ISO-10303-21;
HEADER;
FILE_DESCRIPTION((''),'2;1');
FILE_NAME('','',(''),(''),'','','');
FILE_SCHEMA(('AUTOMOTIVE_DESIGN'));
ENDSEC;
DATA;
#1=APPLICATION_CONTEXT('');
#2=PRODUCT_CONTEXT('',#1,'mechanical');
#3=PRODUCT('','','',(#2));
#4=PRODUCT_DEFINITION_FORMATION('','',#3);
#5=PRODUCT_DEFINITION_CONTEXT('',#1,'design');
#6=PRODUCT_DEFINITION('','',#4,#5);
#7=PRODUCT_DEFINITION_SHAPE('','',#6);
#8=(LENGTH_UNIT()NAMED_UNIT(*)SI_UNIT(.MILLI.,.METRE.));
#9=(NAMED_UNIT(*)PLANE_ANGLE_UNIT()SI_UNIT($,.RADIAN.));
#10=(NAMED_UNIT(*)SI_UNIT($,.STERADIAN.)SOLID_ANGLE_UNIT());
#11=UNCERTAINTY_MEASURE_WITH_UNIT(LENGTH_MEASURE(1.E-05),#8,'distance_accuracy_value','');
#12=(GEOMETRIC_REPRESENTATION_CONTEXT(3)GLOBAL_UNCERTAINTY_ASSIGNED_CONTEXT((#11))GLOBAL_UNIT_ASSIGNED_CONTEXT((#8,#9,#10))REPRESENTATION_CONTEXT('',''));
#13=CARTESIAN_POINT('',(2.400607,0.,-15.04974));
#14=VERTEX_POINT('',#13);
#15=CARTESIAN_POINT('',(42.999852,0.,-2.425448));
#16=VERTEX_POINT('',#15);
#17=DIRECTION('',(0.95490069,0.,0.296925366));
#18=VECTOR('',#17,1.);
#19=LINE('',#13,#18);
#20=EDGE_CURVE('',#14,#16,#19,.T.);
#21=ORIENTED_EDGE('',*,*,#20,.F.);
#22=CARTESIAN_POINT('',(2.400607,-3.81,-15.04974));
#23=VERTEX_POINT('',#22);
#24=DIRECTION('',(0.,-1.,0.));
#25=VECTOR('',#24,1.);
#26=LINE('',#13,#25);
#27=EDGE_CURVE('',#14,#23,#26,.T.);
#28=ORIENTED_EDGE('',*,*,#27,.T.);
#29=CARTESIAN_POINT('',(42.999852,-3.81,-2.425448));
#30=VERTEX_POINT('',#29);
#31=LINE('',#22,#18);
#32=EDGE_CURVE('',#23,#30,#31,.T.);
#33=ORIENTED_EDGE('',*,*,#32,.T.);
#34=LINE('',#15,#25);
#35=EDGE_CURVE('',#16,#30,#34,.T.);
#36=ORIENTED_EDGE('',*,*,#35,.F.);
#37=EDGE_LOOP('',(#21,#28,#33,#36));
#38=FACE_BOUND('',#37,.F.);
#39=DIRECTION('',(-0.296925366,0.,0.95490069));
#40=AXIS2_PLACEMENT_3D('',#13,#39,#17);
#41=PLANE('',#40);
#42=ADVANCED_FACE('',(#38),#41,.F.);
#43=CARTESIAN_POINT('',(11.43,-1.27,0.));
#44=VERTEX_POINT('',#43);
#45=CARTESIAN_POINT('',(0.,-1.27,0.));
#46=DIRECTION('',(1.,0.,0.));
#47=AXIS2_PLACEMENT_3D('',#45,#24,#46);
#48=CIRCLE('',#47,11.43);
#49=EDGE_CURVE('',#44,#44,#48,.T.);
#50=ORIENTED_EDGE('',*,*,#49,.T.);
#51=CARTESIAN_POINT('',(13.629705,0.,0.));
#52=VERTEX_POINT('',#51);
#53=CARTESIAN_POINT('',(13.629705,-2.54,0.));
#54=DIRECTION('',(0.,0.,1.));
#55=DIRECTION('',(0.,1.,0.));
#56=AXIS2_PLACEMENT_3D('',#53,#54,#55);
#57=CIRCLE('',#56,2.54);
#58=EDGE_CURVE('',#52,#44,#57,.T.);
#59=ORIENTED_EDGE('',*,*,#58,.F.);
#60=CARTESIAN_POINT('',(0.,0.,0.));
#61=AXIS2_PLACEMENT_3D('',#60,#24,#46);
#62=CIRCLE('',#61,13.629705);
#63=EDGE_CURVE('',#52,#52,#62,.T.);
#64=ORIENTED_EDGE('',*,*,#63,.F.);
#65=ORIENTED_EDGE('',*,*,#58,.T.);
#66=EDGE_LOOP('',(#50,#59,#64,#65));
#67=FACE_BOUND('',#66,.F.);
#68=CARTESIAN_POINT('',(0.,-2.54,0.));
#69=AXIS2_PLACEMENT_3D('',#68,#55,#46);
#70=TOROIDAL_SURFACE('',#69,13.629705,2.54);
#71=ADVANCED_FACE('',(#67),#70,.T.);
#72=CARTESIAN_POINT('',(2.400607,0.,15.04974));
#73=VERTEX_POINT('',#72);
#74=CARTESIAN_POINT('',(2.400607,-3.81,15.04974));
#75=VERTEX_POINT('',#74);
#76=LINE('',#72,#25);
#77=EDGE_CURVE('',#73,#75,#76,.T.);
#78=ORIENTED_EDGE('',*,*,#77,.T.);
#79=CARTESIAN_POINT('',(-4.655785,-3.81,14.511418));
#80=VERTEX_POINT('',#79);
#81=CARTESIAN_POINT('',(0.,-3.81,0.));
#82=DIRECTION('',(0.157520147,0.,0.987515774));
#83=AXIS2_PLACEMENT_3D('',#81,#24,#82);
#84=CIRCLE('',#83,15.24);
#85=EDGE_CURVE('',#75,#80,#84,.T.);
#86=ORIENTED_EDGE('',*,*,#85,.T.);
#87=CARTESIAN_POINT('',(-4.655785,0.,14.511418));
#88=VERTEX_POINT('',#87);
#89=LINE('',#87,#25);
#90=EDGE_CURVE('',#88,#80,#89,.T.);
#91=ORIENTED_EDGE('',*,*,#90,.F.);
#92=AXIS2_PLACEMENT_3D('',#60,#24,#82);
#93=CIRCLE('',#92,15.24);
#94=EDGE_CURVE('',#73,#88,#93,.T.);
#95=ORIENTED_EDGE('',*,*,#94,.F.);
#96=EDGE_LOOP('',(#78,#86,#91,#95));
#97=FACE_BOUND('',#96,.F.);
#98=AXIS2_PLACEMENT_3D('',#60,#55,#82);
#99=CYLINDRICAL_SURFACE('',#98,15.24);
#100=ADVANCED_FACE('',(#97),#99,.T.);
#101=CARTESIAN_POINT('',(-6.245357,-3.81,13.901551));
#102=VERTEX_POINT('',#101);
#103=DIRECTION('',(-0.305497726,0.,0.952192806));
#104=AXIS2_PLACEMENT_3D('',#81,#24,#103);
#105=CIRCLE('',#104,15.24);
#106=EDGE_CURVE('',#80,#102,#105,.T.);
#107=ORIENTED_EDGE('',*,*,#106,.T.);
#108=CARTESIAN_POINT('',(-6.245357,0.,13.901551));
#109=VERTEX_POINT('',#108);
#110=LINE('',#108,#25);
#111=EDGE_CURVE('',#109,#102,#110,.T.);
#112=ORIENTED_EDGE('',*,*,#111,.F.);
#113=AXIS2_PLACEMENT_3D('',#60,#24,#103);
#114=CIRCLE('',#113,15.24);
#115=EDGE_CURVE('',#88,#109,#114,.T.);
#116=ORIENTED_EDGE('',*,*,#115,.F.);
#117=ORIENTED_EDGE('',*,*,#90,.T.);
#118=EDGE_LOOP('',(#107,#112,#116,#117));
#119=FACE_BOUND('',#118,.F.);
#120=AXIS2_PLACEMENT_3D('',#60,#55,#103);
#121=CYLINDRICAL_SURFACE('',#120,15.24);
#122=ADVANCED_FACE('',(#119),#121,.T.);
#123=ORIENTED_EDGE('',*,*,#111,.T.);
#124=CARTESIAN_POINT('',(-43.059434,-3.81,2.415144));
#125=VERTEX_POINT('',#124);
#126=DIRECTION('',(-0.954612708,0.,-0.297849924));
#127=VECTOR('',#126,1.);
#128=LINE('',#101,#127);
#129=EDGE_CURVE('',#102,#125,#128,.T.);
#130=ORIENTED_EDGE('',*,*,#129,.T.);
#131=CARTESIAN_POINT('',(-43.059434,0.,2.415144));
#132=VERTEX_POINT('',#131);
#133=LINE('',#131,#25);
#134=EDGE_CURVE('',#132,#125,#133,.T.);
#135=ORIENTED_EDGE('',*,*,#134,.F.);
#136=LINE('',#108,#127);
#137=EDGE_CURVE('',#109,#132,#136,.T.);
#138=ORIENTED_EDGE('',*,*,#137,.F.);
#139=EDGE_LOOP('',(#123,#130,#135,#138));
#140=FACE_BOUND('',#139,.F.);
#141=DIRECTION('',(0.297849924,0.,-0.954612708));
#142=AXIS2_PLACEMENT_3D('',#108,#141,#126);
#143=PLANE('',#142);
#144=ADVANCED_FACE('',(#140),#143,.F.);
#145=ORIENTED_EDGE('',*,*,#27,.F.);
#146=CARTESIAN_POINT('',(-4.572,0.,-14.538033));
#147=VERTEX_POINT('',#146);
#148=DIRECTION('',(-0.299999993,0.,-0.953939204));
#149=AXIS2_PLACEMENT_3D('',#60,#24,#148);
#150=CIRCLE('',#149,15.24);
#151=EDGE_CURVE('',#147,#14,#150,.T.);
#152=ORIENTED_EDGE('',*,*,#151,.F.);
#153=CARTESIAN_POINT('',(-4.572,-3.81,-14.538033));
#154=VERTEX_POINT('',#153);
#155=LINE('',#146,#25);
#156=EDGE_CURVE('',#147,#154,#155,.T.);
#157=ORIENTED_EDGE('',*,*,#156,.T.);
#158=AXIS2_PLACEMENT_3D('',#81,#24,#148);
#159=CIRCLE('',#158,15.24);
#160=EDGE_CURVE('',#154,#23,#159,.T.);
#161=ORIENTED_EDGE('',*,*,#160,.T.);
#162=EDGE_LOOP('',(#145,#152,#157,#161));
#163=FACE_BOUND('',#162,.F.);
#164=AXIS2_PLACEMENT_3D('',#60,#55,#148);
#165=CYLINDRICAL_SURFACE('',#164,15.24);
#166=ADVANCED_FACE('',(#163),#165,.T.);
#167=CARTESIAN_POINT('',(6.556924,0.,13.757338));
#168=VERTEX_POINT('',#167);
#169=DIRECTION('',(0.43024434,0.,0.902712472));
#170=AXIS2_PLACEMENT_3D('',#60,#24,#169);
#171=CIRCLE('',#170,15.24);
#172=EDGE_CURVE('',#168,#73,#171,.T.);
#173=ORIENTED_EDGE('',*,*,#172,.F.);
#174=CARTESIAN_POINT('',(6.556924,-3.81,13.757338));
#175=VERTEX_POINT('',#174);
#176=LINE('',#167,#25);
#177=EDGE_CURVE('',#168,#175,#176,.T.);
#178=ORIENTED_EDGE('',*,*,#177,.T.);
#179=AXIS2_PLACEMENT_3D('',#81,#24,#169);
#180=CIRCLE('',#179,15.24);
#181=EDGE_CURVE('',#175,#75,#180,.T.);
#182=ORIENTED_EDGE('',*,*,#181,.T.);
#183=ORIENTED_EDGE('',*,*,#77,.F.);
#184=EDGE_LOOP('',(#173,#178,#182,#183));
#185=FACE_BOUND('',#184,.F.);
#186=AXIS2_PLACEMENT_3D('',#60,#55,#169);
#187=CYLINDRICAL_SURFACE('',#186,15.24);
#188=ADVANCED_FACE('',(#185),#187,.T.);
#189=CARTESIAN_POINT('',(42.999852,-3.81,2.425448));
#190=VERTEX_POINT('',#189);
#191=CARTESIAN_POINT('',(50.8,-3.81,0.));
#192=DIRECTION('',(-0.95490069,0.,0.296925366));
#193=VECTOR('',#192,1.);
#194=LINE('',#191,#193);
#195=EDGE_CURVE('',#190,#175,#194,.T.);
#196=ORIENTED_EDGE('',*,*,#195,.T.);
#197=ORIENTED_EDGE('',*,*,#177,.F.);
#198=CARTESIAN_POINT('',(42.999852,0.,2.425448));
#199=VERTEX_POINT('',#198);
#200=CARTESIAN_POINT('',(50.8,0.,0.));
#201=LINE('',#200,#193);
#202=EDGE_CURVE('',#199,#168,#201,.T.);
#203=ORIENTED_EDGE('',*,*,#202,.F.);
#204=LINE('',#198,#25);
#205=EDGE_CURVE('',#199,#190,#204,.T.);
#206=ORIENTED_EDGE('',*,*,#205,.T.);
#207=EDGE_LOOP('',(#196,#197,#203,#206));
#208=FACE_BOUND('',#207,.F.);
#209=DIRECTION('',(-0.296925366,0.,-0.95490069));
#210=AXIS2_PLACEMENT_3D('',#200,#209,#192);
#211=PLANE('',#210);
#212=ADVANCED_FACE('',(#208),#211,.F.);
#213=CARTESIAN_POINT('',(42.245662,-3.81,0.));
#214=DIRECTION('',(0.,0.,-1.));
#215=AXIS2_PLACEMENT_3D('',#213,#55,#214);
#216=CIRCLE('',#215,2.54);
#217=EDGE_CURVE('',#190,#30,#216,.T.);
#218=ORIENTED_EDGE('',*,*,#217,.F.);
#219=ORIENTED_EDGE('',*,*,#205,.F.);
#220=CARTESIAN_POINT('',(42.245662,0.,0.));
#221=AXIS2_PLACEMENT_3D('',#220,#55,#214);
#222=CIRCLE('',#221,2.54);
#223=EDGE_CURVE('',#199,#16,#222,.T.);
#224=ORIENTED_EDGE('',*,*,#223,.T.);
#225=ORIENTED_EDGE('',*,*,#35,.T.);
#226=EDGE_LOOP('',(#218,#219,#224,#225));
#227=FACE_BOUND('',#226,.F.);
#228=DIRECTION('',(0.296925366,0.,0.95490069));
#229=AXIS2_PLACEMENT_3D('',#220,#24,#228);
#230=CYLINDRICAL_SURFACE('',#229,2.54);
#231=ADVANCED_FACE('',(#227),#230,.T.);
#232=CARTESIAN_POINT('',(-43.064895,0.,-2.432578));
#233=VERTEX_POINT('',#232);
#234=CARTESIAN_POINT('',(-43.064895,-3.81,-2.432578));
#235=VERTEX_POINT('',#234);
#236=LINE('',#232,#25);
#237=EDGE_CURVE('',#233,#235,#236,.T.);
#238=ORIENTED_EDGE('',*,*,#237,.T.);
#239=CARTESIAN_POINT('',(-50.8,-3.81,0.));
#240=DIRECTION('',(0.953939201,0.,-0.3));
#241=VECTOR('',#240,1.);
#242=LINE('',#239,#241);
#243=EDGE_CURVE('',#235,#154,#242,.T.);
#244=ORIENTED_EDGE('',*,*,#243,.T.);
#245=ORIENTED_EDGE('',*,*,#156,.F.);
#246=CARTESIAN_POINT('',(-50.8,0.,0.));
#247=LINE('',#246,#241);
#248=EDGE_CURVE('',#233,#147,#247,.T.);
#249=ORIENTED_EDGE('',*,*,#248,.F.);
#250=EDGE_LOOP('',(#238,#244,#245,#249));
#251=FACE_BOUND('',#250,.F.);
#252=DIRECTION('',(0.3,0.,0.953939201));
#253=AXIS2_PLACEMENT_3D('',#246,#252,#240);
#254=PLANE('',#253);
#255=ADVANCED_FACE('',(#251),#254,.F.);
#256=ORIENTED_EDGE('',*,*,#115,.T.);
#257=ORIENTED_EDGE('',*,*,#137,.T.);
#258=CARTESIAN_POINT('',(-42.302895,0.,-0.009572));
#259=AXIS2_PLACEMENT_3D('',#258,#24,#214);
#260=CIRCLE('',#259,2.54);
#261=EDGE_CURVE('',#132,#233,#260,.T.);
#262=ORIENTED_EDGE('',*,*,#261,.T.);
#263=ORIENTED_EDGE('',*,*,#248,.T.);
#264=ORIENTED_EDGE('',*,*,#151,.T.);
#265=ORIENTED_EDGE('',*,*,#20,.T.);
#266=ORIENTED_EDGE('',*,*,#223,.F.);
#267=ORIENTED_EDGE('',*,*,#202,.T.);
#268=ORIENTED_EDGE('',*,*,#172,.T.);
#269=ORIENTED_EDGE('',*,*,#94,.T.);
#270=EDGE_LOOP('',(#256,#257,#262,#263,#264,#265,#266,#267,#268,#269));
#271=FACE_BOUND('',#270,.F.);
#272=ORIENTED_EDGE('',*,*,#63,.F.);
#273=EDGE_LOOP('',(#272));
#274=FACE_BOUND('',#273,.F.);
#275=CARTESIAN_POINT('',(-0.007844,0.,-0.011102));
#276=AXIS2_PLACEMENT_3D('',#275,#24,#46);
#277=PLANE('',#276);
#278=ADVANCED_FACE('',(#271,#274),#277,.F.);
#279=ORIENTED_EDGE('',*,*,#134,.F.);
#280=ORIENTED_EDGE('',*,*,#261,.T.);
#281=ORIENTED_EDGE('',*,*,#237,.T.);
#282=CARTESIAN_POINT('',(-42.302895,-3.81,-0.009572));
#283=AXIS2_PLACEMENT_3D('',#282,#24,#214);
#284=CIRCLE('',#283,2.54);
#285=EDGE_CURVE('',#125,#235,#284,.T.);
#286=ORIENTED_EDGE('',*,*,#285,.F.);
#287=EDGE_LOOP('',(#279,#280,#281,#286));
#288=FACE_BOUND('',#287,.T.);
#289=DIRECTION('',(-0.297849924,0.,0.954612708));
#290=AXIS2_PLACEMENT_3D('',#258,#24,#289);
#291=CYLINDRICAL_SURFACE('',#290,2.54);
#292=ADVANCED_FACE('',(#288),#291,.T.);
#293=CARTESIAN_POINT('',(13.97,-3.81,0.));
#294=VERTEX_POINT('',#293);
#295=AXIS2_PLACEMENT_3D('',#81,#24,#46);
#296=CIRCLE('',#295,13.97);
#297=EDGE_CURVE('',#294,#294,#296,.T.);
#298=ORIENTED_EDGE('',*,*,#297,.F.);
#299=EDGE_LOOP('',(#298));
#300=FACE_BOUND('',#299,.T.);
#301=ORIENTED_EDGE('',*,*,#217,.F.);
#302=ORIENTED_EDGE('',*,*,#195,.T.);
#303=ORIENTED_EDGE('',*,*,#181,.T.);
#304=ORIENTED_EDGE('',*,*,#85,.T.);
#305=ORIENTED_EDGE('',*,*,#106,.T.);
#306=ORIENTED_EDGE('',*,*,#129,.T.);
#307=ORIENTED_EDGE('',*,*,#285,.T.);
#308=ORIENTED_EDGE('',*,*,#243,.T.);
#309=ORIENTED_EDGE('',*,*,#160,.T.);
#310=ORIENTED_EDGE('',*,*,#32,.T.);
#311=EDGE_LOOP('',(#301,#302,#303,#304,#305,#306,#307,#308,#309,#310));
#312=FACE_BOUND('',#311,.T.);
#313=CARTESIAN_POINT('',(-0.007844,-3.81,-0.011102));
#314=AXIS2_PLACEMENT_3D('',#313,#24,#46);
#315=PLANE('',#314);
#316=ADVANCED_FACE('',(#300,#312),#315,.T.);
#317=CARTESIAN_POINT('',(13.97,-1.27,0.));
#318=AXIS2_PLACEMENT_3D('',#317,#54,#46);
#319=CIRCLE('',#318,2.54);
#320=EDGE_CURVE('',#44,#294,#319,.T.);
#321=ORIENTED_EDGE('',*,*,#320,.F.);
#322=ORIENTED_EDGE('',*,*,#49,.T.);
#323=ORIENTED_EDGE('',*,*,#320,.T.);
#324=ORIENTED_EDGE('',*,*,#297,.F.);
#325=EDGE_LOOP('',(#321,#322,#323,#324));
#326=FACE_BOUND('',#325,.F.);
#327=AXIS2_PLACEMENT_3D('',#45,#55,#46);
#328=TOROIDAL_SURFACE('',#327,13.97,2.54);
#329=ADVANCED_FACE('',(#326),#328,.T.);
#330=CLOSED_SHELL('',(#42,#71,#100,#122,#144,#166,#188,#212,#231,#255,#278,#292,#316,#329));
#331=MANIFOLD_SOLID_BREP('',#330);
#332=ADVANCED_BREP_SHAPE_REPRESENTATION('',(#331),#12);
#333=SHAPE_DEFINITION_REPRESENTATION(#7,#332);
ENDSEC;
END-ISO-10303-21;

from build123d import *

# Parameters (mm, degrees)
F0_R     = 11.43
F1_DEPTH = 3.81
F2_R     = 2.54


# Not quite as in the source:
# - a fillet or chamfer that OpenCascade refuses, or shapes differently, is made with other operations: its cross-section is extruded or revolved along the edge and cut away or added


with BuildPart() as f1:
    # F0 (on Front) → F1 (new body)
    with BuildSketch(Plane.XZ):
        with BuildLine():
            Line((6.5569237481, 13.7573380769), (2.4006070358, 15.0497403918))
            ThreePointArc((2.4006070358, 15.0497403918), (-1.1592691439, 15.195844664), (-4.6557853401, 14.5114183617))
            ThreePointArc((-4.6557853401, 14.5114183617), (-5.4590945375, 14.2286994076), (-6.2453574463, 13.9015506462))
            Line((-6.2453574463, 13.9015506462), (-50.8, 0))
            Line((-50.8, 0), (-4.5719998884, -14.5380334647))
            ThreePointArc((-4.5719998884, -14.5380334647), (-1.1154361142, -15.1991250497), (2.4006070358, -15.0497403918))
            Line((2.4006070358, -15.0497403918), (50.8, 0))
            Line((50.8, 0), (6.5569237481, 13.7573380769))
        make_face()
        Circle(F0_R, mode=Mode.SUBTRACT)
        with BuildLine():
            ThreePointArc((6.5569237481, 13.7573380769), (4.5251425803, 14.552686509), (2.4006070358, 15.0497403918))
            Line((2.4006070358, 15.0497403918), (6.5569237481, 13.7573380769))
        make_face()
    extrude(amount=F1_DEPTH)

    # F2
    f2_edges = [f1.edges().sort_by_distance(p)[0] for p in [
        (50.8, -1.905, 0),
        (-50.8, -1.905, 0),
        (-11.43, -3.81, 0),
    ]]
    fillet(f2_edges, radius=F2_R)

    # F3: fillet of radius 2.54 on 1 edges, made by hand

    # F3_s1 → F3_t2 (revolve, cut)
    with BuildSketch(Plane.XY):
        with BuildLine():
            ThreePointArc((13.6297045256, 0), (12.3597045256, -0.3402954744), (11.43, -1.27))
            Line((11.43, -1.27), (11.43, 0))
            Line((11.43, 0), (13.6297045256, 0))
        make_face()
    revolve(axis=Axis((0, 0, 0), (0, -1, 0)), mode=Mode.SUBTRACT)


solid = f1.part
